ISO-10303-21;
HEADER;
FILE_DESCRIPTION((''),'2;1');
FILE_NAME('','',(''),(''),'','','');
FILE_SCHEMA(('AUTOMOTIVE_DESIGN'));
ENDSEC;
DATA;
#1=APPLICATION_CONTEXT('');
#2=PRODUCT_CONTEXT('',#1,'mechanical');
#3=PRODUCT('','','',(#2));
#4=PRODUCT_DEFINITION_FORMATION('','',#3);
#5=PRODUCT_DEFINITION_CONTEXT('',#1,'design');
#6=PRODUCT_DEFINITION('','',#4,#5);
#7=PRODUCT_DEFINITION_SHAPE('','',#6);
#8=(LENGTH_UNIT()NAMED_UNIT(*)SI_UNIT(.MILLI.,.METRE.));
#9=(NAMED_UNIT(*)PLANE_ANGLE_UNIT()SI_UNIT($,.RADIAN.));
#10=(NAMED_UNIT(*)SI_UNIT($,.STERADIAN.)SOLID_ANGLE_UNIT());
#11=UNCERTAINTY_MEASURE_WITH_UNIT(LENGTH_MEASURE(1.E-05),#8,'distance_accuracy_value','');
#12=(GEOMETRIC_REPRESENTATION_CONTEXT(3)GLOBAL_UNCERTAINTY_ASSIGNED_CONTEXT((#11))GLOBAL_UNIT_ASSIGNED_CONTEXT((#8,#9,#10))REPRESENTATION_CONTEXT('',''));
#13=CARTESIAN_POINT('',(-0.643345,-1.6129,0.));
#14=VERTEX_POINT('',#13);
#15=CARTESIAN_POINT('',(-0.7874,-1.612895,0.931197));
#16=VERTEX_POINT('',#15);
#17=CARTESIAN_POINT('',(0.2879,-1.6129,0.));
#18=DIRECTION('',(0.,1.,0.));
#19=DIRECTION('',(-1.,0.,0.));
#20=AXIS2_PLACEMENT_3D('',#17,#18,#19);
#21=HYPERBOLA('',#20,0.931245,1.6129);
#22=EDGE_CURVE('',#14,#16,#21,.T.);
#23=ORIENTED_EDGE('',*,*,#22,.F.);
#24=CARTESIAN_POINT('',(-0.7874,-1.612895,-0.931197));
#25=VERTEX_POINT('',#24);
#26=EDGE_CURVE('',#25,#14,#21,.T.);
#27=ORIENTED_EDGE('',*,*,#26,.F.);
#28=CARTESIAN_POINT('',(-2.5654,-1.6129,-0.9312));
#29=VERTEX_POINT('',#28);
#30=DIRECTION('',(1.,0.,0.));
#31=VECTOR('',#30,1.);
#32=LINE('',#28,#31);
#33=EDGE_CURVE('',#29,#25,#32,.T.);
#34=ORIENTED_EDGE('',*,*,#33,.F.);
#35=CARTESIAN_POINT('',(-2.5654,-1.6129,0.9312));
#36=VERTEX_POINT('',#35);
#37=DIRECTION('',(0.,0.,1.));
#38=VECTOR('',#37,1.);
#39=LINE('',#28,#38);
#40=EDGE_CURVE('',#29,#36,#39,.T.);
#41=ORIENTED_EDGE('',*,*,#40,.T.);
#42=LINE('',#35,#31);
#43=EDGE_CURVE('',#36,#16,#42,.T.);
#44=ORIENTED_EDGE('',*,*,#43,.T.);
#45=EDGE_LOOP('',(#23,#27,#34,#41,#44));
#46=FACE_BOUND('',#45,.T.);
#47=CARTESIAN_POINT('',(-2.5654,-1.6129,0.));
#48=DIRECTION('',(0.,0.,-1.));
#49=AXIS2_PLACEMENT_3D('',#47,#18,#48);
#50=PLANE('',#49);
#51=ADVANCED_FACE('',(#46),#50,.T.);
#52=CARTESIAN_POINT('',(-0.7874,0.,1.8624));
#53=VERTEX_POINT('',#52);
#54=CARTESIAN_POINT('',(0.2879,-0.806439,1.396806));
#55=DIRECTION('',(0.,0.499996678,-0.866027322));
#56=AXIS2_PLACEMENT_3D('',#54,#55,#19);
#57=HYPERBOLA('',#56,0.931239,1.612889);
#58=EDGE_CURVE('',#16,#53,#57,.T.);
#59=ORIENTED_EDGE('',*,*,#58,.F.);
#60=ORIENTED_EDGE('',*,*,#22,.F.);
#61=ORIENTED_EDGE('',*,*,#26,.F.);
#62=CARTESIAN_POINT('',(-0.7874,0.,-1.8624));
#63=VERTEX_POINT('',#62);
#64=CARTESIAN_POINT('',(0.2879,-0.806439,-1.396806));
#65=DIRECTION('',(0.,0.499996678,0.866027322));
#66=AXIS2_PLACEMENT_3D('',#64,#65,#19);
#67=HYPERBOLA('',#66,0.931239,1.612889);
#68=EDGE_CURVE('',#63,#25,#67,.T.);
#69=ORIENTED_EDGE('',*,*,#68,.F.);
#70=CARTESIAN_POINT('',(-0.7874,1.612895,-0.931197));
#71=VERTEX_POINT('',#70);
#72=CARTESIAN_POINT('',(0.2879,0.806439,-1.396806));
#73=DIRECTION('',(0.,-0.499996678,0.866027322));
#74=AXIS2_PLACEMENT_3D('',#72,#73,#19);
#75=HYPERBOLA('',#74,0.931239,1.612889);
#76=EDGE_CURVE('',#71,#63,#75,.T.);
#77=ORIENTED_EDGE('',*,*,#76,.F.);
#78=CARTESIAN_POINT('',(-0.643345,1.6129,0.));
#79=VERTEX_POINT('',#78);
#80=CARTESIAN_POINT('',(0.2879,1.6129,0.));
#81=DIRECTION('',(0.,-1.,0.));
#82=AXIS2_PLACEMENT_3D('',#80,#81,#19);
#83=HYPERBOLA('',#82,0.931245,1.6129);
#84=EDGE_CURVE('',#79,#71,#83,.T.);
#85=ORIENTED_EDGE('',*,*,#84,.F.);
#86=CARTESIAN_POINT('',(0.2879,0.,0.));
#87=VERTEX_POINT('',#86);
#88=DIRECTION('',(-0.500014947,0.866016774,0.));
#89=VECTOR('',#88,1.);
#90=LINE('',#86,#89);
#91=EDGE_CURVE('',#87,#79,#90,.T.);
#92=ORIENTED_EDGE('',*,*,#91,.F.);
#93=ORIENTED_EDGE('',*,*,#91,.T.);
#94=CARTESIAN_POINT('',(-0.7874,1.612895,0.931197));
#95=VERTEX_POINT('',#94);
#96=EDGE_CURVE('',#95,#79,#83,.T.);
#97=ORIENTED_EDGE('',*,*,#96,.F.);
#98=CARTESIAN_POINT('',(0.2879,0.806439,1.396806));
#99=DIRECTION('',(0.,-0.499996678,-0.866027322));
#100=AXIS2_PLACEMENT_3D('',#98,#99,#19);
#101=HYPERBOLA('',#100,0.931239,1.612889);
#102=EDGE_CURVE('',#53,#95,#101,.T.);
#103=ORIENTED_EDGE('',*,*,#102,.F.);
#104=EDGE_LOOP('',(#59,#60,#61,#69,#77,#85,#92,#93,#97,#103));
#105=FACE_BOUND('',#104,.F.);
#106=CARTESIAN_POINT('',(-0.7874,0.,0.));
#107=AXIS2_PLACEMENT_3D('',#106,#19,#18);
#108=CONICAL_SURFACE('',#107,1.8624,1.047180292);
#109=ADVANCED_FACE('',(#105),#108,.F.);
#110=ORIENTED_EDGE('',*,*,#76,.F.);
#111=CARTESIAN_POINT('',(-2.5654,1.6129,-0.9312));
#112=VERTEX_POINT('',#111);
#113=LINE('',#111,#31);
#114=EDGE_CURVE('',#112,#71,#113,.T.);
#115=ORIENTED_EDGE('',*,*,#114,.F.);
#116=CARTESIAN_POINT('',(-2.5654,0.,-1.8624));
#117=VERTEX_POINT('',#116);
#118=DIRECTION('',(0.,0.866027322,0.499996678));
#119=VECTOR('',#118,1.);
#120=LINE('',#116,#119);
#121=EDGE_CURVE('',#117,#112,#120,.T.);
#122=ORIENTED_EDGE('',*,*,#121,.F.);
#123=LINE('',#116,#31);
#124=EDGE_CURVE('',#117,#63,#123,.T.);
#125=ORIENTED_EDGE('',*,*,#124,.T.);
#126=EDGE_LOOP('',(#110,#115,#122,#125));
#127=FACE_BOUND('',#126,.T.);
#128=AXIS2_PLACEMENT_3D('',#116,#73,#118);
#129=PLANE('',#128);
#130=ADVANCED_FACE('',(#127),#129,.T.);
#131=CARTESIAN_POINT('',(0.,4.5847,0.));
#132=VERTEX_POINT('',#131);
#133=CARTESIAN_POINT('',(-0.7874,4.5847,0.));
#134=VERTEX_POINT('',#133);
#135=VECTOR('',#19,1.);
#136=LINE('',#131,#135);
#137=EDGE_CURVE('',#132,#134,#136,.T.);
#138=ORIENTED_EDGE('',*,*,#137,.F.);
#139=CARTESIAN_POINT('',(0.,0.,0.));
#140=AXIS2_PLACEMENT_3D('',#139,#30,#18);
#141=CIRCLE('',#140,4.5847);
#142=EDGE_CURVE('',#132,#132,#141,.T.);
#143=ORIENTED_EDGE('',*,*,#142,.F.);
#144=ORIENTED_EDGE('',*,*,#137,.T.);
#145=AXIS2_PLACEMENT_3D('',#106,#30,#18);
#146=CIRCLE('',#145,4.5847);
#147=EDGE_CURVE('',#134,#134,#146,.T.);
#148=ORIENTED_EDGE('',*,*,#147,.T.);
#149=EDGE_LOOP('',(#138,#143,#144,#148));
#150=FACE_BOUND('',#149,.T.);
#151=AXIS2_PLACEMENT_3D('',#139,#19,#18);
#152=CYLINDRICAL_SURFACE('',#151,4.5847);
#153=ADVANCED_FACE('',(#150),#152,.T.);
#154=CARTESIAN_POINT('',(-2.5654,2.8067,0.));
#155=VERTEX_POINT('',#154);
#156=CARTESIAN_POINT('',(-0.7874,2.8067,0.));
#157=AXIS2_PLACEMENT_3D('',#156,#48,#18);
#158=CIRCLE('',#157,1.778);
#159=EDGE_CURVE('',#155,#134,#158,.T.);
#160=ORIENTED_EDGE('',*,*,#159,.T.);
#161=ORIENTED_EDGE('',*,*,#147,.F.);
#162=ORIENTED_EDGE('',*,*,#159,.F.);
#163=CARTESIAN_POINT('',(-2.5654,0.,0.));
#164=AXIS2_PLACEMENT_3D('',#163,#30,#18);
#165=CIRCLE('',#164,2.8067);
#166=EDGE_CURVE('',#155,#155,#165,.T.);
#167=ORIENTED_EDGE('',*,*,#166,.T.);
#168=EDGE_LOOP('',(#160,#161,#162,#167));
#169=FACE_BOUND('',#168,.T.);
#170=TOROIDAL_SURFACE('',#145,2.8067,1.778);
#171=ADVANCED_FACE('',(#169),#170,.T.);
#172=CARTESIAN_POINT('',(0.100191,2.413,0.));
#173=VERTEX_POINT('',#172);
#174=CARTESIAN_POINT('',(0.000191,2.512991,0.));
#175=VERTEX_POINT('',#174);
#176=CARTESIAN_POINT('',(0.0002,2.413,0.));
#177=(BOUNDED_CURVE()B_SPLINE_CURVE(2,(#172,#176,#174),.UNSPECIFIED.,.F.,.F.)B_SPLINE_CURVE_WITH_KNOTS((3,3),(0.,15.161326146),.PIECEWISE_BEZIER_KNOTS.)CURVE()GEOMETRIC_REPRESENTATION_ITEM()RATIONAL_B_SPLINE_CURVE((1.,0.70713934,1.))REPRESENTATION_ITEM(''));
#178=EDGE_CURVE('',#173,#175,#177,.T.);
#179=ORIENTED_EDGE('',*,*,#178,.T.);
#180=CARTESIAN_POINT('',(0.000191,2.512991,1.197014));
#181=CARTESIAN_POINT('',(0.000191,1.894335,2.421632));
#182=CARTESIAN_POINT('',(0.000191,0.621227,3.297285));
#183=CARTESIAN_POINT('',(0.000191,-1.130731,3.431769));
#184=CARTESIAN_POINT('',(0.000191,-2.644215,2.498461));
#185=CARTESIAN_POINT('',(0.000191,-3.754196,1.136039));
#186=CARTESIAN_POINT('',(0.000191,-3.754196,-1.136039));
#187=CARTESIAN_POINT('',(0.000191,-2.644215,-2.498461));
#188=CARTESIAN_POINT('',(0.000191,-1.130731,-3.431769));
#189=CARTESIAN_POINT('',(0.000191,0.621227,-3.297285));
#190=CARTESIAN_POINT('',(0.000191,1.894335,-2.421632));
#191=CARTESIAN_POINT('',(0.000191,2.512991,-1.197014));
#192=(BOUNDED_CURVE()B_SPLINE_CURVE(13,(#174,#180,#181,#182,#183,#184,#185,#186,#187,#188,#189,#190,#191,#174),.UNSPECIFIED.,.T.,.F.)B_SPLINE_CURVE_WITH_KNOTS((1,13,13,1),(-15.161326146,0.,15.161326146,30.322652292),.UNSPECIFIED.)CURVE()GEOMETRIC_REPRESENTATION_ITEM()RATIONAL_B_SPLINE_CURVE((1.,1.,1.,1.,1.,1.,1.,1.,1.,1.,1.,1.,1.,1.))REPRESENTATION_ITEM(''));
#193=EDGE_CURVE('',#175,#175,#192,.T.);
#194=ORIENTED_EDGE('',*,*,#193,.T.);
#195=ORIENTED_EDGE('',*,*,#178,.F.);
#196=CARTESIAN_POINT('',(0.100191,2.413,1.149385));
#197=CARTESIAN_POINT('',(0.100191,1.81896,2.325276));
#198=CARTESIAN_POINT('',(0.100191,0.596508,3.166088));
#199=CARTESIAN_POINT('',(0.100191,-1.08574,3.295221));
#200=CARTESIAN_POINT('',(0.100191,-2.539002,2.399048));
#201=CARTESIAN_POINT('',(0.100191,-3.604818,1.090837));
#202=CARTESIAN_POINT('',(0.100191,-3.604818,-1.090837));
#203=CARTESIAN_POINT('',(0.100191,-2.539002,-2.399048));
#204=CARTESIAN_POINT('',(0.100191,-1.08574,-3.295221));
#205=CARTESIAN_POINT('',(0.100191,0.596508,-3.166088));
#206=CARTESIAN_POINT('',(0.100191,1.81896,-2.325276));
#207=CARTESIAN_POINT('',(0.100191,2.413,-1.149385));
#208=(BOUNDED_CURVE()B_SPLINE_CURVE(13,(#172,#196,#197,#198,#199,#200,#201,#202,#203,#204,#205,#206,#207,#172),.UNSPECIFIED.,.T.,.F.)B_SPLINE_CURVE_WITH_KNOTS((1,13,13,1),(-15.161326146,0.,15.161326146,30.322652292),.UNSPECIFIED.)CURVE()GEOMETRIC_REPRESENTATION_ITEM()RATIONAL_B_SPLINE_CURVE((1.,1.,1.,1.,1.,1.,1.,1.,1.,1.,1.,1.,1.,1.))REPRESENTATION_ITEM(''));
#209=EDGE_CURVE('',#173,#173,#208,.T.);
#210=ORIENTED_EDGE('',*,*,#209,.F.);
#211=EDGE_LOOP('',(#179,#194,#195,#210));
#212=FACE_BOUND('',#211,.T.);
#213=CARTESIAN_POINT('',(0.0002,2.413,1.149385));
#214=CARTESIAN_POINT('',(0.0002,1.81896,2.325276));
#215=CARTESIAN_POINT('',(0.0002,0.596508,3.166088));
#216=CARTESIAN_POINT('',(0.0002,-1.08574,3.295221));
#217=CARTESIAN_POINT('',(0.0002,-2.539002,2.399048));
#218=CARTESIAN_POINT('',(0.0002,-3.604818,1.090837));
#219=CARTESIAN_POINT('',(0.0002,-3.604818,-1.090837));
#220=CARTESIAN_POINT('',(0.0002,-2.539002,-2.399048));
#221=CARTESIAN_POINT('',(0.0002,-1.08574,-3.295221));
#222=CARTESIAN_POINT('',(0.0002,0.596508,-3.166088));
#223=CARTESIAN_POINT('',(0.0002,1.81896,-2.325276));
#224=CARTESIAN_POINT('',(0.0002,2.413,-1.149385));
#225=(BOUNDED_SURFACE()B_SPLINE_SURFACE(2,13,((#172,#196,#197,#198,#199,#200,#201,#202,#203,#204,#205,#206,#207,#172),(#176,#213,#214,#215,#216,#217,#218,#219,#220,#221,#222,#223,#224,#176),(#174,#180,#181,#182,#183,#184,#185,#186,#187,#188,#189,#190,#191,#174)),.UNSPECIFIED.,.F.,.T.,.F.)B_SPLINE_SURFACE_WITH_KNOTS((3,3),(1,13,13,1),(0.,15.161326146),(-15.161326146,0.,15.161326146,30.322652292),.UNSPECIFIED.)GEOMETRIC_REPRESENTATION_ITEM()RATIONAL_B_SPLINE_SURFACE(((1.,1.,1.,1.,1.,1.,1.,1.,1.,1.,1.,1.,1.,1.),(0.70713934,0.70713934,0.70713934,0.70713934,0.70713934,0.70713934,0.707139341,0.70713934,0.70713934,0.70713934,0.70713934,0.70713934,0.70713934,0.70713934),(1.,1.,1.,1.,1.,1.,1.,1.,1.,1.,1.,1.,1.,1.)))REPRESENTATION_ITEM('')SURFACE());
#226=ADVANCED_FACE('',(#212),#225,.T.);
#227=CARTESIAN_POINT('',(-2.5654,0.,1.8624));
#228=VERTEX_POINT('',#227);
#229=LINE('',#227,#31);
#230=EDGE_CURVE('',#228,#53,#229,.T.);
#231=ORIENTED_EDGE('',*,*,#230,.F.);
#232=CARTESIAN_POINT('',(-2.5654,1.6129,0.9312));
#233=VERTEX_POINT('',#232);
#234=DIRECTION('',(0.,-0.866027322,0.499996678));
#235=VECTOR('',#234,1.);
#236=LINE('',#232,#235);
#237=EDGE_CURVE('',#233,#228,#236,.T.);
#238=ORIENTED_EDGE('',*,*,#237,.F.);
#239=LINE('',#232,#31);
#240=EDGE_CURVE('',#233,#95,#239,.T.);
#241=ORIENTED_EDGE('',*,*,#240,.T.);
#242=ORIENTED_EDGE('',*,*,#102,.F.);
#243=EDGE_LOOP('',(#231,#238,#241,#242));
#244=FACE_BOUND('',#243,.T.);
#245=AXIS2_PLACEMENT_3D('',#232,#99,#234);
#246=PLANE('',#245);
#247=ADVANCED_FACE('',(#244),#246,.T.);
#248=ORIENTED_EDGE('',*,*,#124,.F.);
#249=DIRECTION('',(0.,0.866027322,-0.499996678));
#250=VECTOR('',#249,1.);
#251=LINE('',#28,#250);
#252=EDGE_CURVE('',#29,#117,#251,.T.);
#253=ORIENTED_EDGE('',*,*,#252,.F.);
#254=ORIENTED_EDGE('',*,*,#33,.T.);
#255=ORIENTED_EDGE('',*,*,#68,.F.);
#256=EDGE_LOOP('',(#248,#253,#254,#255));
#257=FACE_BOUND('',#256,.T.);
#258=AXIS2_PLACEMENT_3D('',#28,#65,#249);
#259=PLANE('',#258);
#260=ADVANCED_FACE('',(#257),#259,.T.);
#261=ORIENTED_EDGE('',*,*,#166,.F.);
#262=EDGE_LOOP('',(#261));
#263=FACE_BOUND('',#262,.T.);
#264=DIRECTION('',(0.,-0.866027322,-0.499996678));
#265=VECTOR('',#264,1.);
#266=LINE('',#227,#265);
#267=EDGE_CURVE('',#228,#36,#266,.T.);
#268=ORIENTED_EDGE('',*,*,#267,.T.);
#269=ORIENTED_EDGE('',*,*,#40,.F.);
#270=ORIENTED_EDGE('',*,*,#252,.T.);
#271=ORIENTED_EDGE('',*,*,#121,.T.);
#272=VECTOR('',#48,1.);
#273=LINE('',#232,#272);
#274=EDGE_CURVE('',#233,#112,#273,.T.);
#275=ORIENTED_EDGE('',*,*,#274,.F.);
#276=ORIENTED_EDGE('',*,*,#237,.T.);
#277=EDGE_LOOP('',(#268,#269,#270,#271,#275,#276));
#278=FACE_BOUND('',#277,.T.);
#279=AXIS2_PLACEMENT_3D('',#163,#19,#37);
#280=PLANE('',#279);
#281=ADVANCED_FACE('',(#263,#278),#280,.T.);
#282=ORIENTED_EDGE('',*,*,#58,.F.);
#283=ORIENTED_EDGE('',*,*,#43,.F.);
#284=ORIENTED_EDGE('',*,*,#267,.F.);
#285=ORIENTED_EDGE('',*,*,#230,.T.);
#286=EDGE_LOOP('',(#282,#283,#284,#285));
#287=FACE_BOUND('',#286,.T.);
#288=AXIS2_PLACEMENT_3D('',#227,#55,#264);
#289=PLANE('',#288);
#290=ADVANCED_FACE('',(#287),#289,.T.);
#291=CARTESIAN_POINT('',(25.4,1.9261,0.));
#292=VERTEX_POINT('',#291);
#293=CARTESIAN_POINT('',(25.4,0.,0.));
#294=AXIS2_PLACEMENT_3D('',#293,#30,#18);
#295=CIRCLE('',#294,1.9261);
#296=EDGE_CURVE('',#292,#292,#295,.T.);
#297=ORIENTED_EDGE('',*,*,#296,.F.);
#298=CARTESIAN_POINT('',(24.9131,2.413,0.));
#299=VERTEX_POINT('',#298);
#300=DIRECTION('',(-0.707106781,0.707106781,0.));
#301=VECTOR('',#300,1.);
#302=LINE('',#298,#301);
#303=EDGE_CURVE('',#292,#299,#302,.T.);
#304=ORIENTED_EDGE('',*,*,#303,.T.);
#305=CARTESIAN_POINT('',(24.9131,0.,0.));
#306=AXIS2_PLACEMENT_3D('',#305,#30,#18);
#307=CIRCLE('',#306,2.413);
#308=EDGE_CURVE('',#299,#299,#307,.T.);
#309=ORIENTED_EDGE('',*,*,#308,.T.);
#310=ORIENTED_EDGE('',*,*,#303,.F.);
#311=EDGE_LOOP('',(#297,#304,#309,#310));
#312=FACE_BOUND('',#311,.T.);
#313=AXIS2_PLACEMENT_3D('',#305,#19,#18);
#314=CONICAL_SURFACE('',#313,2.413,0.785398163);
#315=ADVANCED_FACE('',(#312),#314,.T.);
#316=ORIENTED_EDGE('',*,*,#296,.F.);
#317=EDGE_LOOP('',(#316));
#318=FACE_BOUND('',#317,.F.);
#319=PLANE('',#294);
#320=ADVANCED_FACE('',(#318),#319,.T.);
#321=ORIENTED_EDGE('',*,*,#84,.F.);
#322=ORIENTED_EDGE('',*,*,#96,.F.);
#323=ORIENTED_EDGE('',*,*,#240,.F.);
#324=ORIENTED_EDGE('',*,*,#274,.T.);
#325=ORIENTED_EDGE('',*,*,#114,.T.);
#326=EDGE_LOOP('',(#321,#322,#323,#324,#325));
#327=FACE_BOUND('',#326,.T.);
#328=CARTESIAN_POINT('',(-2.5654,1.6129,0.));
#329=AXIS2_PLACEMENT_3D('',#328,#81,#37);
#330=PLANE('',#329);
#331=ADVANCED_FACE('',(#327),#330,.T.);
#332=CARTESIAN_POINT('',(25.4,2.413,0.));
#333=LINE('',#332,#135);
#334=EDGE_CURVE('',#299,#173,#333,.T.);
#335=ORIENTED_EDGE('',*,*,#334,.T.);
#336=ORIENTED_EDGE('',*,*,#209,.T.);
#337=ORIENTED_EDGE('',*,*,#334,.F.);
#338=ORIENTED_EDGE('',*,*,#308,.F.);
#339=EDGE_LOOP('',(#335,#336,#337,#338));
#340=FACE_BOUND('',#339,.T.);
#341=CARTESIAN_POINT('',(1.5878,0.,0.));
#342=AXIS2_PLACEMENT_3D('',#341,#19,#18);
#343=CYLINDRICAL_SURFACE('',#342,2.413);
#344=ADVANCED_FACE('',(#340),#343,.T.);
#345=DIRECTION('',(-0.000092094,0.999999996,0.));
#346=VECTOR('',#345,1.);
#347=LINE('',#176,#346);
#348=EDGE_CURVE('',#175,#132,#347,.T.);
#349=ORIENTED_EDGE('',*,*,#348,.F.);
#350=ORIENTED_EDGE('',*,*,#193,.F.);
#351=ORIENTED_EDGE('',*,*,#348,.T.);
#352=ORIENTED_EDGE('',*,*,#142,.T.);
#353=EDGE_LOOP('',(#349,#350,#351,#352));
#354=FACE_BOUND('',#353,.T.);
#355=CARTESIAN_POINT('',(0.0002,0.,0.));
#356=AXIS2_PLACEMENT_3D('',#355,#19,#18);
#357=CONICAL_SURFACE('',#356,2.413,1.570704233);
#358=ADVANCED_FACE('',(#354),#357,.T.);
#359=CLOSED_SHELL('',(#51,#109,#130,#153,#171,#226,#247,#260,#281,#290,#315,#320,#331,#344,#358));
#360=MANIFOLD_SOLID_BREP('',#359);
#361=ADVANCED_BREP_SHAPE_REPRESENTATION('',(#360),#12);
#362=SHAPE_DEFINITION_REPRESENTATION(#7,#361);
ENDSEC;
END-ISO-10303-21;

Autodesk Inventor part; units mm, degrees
ref_plane "YZ Plane" through (0, 0, 0) normal (1, 0, 0) x (0, 1, 0)
ref_plane "XZ Plane" through (0, 0, 0) normal (0, 1, 0) x (-1, 0, 0)
sketch "Sketch1" plane through (0, 0, 0) normal (0, 0, 1) x (1, 0, 0)
  line L0 (0.2879, 0) -> (25.4, 0)
  line L1 (25.4, 0) -> (25.4, 2.413)
  line L2 (25.4, 2.413) -> (1.5878, 2.413)
  line L3 (1.5878, 2.413) -> (0.0002, 2.413)
  line L4 (0.0002, 2.413) -> (0, 2.413)
  line L5 (0, 2.413) -> (0, 4.5847)
  line L6 (0, 4.5847) -> (-2.5654, 4.5847)
  line L7 (-2.5654, 4.5847) -> (-2.5654, 1.8624)
  line L8 (-2.5654, 1.8624) -> (-0.7874, 1.8624)
  line L9 (-0.7874, 1.8624) -> (0.2879, 0)
  line L10 (-8.1585, 0) -> (30.9931, 0) projected
  line L11 (0, -0.9169) -> (0, 5.5016) projected
  line L12 (1.5878, 2.413) -> (0, 2.413) construction
  dimension "d1" = 23.8122
  dimension "d2" = 1.5876
  dimension "d3" = 2.5654
  dimension "d4" = 1.778
  dimension "d5" = 60
  dimension "d6" = 4.826
  dimension "d7" = 4.826
  dimension "d8" = 3.7248
  dimension "d9" = 9.1694
  dimension "d26" = 25.4
revolve "Body" add sketch "Sketch1" angle 360 about axis through (0.2879, 0, 0) along (1, 0, 0) contours L9 L11 L3 L2 L1 L0 | L9 L8 L7 L6 L5 L11
sketch "Sketch2" plane through (-2.5654, 0, 0) normal (-1, 0, 0) x (0, 0, 1)
  circle A0 centre (0, 0) radius 1.8624 projected
  line L0 (0, -6.4186) -> (0, 6.4186) projected
  line L1 (-6.4186, 0) -> (6.4186, 0) projected
  line L2 (1.8624, 0) -> (0.9312, -1.6129)
  line L3 (0.9312, -1.6129) -> (-0.9312, -1.6129)
  line L4 (-0.9312, -1.6129) -> (-1.8624, 0)
  line L5 (-1.8624, 0) -> (-0.9312, 1.6129)
  line L6 (-0.9312, 1.6129) -> (0.9312, 1.6129)
  line L7 (0.9312, 1.6129) -> (1.8624, 0)
extrude "Slot" add sketch "Sketch2" against normal up to next contours L7 A0 | A0 L2 | L6 L0 A0 | A0 L0 L3 | L0 L6 A0 | A0 L3 L0 | L4 A0 | A0 L5
fillet "Fillet1" radius 1.778 1 edges at (-2.5654, -4.5847, 0)
thread "Thread" size "10-32 UNF" class "2A" standard "ANSI Unified Screw Threads" length 23.8122
chamfer "Chamfer1" distance 0.4869 distance2 0.4869 1 edges at (25.4, -2.413, 0) measured on face at (25.4, 0.9527, 0.2826)
ref_plane "Work Plane1" through (29, 0, 0) normal (0, -1, 0) x (1, 0, 0)
fillet "Fillet2" radius 0.1 1 edges at (0.0002, -2.413, 0)
equation "\"d30\" = R"
equation "\"d17\" = RR"
equation "\"d13\" = GEL"
equation "\"d15\" = -0.5 * SPD + 0.5 * GD"
equation "\"d16\" = GUL"
equation "\"d1\" = GEL"
equation "\"d3\" = KOH"
equation "\"d4\" = INTI"
equation "\"d6\" = GD"
equation "\"d7\" = BDM"
equation "\"d8\" = 1.1547 * SW"
equation "\"d9\" = KOD"
equation "\"d26\" = NLG"
equation "\"GD\" = NND"
equation "\"NLG\" = 25.4"
equation "\"GEL\" = 23.81225"
equation "\"KOD\" = 9.1694"
equation "\"KOH\" = 2.5654"
equation "\"INTI\" = 1.778"
equation "\"GAL\" = 1.5875"
equation "\"GUL\" = 0.48692"
equation "\"BDM\" = NND"
equation "\"SW\" = 3.2258"
equation "\"RR\" = 1.778"
equation "\"SPD\" = GD1"
equation "\"R\" = 0.1"
equation "\"KR\" = 4.699"
equation "\"GD1\" = 3.85216"
equation "\"THREADDIA\" = 4.826"
equation "\"FAWI\" = 45deg"
equation "\"KOH1\" = 1.778"
equation "\"NND\" = 4.826"
equation "\"TOA\" = 30deg"
equation "\"E0\" = 1.155 * SW"
properties part number "Unbrako - 10 x 1" material "Steel, Mild"
